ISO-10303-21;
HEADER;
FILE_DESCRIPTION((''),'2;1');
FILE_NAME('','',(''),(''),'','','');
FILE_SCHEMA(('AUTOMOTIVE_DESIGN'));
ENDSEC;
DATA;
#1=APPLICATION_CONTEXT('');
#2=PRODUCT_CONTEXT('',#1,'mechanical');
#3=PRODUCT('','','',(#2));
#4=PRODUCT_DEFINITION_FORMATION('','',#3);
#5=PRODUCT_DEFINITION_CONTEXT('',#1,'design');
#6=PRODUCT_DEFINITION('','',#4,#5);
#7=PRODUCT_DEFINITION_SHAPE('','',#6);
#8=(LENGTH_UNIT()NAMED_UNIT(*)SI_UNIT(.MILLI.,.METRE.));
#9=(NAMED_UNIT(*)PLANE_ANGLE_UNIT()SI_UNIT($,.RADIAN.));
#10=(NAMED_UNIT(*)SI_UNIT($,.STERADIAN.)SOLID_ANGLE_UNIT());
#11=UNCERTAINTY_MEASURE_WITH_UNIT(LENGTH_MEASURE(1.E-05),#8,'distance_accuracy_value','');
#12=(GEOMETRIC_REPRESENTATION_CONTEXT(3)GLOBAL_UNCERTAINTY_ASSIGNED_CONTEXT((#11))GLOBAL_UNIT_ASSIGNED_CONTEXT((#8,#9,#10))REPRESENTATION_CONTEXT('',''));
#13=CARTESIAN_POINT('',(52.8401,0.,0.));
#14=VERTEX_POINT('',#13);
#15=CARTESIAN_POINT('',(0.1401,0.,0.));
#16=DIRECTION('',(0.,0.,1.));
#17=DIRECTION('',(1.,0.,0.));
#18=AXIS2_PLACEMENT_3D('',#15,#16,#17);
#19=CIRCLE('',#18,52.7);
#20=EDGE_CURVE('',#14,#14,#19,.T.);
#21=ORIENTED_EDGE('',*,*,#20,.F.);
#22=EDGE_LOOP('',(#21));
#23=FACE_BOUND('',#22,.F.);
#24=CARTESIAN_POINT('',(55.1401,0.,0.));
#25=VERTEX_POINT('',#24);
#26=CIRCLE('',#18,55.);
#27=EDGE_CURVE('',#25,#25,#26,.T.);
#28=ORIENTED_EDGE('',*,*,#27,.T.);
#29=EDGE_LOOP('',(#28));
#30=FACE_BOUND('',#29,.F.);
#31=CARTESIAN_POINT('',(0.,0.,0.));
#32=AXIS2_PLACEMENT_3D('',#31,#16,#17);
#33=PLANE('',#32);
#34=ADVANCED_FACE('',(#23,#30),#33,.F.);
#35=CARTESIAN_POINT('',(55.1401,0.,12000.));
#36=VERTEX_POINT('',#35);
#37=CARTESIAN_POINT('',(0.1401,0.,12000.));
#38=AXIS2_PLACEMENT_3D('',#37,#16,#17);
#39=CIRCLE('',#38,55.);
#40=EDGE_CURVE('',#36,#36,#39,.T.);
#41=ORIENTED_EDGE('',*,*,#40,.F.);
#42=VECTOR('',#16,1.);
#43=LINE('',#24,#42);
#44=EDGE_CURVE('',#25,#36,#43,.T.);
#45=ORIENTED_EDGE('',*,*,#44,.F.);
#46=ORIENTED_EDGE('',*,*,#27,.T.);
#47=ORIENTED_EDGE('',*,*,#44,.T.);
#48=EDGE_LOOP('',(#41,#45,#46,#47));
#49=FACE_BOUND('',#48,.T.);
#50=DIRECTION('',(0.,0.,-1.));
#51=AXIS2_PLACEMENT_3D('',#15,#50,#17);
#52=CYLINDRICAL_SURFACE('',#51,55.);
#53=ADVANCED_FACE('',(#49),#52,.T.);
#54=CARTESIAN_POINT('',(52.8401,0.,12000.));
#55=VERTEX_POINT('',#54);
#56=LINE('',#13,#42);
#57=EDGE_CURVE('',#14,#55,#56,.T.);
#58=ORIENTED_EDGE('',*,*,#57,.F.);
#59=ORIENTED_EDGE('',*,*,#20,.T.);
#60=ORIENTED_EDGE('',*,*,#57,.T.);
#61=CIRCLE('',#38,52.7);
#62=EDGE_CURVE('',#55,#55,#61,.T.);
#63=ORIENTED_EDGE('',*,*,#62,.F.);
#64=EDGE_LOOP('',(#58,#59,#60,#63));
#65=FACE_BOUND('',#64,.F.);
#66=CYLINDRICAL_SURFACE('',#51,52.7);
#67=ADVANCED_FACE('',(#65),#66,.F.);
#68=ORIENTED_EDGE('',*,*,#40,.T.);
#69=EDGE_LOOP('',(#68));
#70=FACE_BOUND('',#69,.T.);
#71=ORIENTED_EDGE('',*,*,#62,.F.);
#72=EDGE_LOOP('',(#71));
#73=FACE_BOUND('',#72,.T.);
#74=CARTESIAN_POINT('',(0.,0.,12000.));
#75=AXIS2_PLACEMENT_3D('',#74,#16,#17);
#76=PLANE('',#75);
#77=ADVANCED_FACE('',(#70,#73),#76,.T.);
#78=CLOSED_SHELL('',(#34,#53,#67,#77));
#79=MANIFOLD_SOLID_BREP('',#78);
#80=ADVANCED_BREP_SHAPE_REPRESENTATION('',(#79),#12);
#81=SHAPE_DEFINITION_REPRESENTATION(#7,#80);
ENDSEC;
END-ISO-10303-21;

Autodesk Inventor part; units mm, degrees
ref_plane "YZ Plane" through (0, 0, 0) normal (1, 0, 0) x (0, 1, 0)
ref_plane "XZ Plane" through (0, 0, 0) normal (0, 1, 0) x (-1, 0, 0)
ref_plane "XY Plane" through (0, 0, 0) normal (0, 0, 1) x (1, 0, 0)
sketch "Sketch1" plane through (0, 0, 0) normal (0, 0, 1) x (1, 0, 0)
  circle A0 centre (0.1401, 0) radius 55
  circle A1 centre (0.1401, 0) radius 52.7
  point P0 (0, 0)
  dimension "d1" = 2.3
  dimension "d2" = 110
extrude "Extrusion1" add sketch "Sketch1" along normal blind 12000
properties part number "pipe_6in_0.5m"
